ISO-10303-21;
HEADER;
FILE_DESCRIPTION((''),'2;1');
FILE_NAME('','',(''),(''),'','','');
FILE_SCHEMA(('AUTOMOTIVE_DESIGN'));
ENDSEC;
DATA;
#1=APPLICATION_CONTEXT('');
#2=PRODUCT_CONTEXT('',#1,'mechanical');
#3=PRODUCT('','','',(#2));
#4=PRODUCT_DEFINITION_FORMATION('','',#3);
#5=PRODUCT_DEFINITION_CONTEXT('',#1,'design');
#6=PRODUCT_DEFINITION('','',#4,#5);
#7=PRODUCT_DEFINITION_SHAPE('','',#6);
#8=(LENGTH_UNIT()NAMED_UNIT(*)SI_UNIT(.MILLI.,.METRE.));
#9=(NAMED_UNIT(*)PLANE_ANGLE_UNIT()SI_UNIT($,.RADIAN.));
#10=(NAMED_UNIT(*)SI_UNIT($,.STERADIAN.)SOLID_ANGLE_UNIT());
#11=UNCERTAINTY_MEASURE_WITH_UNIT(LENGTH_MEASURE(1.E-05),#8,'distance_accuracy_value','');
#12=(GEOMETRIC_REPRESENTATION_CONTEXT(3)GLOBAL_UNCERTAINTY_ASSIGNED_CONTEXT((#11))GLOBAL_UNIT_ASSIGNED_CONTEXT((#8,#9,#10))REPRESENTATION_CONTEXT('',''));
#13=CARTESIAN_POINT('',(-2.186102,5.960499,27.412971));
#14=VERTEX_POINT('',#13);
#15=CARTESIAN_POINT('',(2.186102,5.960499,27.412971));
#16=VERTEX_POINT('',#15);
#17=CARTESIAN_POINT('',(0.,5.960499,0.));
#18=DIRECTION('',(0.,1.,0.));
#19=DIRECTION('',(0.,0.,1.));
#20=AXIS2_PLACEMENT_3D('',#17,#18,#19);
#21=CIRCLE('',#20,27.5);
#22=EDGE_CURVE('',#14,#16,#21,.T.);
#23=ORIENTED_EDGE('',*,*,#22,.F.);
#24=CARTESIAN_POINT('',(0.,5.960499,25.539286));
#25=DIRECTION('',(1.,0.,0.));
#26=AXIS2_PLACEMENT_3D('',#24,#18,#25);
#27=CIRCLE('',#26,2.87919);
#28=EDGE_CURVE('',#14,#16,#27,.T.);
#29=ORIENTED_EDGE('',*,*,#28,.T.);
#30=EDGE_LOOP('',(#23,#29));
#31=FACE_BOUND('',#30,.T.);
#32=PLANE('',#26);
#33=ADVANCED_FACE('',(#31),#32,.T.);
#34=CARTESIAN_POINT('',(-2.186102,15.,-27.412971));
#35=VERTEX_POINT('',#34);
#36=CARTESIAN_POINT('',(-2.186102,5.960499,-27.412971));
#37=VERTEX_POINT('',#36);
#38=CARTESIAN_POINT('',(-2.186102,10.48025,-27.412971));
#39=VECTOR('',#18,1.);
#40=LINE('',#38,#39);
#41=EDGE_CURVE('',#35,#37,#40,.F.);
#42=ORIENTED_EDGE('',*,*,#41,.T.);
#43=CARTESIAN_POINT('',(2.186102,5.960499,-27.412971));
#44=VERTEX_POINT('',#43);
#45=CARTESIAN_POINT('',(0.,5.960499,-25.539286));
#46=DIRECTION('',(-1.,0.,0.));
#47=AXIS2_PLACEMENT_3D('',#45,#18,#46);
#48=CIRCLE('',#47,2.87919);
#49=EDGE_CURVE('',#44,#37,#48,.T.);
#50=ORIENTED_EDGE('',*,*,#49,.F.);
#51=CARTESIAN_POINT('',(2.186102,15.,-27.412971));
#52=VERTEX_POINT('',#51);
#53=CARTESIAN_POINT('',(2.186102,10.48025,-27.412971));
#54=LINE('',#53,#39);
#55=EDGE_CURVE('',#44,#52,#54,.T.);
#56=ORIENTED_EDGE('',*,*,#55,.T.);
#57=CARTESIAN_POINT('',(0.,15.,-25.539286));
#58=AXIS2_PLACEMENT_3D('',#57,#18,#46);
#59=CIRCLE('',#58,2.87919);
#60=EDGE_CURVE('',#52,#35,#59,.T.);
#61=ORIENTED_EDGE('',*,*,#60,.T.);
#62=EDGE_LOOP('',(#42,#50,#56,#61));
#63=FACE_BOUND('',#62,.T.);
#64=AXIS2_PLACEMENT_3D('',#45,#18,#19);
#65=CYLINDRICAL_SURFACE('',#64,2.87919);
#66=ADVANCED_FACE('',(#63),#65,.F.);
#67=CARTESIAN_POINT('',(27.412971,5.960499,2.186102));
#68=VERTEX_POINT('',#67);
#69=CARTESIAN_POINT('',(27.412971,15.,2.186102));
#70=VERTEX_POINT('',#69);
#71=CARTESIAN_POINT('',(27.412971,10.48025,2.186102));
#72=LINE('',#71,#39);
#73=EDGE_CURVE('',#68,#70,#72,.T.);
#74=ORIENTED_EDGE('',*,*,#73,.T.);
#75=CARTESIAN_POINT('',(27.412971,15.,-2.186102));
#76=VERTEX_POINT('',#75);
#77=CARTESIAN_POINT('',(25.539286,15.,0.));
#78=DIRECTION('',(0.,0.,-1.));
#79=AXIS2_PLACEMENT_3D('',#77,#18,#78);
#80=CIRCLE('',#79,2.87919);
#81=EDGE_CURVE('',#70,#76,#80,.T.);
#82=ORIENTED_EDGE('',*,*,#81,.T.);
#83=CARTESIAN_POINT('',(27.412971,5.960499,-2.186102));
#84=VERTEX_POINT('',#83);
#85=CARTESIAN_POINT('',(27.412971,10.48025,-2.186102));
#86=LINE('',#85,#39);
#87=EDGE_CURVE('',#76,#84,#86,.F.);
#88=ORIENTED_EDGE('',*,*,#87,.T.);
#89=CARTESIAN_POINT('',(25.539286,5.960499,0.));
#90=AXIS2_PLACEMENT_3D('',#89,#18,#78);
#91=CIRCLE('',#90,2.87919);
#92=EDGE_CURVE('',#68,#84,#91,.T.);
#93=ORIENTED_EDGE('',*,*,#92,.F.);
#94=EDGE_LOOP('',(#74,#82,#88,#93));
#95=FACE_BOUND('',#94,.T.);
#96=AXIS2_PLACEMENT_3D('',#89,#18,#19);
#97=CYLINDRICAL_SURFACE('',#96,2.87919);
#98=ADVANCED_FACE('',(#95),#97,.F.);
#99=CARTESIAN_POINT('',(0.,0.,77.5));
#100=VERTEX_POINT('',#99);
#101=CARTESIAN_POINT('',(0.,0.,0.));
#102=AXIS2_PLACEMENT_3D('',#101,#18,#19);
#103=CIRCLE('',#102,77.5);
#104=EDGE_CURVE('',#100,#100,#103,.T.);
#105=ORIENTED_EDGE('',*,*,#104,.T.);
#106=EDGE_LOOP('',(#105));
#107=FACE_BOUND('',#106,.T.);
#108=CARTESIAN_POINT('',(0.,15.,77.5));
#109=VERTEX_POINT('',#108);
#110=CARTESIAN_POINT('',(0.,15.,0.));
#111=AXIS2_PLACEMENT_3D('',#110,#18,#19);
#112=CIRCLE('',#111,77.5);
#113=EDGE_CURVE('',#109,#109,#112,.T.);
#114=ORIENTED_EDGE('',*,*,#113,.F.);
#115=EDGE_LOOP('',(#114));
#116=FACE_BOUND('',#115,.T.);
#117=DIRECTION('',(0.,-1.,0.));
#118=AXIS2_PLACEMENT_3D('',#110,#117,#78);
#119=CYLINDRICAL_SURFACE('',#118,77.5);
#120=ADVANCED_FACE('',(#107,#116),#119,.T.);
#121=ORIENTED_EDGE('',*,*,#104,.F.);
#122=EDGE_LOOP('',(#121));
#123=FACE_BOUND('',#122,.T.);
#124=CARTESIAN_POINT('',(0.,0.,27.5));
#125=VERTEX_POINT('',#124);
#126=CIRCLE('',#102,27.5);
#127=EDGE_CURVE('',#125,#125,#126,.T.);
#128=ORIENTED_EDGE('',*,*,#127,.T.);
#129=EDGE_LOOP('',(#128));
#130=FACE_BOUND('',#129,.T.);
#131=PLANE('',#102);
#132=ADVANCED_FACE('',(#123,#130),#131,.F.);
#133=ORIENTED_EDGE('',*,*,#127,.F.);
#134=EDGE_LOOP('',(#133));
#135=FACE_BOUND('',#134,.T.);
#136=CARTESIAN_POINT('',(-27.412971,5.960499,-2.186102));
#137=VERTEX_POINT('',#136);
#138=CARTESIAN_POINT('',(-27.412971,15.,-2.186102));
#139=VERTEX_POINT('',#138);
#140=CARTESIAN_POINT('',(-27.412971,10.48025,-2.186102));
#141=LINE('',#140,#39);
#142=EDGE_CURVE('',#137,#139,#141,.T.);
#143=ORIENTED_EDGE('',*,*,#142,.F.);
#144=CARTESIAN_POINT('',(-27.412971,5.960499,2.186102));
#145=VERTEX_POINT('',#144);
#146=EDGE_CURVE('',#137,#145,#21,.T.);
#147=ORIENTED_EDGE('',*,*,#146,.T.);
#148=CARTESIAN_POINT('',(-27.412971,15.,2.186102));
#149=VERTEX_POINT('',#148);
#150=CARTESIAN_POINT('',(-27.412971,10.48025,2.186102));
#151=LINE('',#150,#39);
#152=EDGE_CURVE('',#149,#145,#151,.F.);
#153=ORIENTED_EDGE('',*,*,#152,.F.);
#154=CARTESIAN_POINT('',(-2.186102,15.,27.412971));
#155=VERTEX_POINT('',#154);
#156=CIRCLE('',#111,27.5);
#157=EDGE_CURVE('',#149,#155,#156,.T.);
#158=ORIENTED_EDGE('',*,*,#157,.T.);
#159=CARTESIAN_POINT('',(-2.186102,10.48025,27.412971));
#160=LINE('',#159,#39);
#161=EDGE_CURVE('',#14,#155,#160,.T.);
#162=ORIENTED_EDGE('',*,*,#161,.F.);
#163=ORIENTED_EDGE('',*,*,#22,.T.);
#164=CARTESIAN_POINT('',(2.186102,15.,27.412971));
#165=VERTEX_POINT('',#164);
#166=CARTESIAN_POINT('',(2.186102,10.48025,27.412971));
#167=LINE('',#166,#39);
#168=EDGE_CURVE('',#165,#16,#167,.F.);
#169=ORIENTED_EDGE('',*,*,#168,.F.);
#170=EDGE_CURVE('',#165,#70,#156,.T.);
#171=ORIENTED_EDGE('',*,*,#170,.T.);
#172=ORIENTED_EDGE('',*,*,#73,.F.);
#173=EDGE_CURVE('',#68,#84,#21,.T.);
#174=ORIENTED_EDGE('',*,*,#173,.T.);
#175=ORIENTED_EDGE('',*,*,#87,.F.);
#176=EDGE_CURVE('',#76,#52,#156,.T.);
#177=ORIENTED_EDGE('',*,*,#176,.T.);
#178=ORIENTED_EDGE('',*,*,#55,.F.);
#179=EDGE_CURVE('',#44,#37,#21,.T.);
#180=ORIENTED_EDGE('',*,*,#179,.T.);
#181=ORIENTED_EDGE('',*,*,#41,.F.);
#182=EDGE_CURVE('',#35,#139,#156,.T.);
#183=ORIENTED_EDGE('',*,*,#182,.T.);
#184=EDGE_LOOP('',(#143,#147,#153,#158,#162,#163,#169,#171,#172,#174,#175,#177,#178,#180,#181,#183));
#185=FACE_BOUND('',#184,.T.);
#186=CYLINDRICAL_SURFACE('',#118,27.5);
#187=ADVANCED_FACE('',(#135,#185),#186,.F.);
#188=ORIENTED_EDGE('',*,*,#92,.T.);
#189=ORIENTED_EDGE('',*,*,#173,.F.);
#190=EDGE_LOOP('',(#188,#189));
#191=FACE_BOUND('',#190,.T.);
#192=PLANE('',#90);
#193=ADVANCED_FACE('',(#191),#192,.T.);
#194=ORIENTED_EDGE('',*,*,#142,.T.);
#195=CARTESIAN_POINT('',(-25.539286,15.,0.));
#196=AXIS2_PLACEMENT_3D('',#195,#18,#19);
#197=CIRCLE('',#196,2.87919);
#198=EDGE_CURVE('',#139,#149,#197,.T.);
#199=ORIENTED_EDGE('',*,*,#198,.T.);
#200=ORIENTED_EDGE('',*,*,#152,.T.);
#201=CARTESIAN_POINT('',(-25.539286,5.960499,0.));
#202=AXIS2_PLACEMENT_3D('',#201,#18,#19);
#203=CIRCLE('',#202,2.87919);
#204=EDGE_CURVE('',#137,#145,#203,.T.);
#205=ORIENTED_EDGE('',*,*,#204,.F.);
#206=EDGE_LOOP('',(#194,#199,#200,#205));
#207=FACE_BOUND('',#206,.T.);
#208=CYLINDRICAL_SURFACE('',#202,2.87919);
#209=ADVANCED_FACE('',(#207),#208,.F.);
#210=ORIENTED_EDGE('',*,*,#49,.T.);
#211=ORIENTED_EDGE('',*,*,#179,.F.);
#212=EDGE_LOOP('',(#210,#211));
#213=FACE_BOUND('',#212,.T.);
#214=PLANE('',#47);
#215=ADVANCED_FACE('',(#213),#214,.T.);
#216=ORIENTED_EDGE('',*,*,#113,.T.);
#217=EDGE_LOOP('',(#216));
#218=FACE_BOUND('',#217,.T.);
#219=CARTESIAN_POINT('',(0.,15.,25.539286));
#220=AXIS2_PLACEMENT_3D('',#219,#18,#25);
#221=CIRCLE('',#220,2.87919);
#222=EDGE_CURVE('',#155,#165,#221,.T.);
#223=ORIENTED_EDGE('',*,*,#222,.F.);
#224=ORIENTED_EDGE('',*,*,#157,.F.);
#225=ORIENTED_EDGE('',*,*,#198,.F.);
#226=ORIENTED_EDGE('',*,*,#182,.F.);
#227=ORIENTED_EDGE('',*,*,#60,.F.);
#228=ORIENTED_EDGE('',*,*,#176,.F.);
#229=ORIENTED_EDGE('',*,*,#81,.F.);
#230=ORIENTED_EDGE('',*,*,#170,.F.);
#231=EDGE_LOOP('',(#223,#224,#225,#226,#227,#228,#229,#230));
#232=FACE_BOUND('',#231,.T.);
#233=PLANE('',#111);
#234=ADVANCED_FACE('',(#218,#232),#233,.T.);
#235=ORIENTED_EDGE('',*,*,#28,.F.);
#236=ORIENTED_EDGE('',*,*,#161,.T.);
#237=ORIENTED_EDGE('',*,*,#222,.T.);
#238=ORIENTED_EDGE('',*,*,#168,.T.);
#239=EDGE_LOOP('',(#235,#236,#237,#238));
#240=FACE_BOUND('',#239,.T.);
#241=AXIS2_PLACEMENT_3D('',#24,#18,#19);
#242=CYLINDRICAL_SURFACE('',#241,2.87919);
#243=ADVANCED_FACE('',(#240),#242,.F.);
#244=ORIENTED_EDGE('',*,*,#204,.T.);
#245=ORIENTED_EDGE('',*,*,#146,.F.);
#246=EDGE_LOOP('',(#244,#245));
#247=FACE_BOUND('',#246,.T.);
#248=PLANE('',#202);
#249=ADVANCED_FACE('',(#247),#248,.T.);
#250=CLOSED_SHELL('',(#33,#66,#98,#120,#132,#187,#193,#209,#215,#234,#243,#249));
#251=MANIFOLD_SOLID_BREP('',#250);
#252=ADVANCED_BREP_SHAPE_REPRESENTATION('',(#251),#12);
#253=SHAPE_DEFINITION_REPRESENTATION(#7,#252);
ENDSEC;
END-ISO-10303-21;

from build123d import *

# Parameters (mm, degrees)
SKETCH1_R           = 77.5
BOSS_EXTRUDE1_DEPTH = 15
SKETCH2_R           = 27.5
CUT_EXTRUDE1_DEPTH  = 111.623234449
SKETCH3_R           = 2.879190032
CUT_EXTRUDE2_DEPTH  = 9.039500984
CIRPATTERN1_COUNT   = 4


with BuildPart() as part:
    # Sketch1 → Boss-Extrude1 (new body)
    with BuildSketch(Plane(origin=(0, 0, 0), x_dir=(1, 0, 0), z_dir=(0, 1, 0))):
        Circle(SKETCH1_R)
    extrude(amount=BOSS_EXTRUDE1_DEPTH)

    # Sketch2 → Cut-Extrude1 (cut, through all)
    with BuildSketch(Plane(origin=(0, 0, 0), x_dir=(1, 0, 0), z_dir=(0, 1, 0))):
        Circle(SKETCH2_R)
    extrude(amount=CUT_EXTRUDE1_DEPTH, mode=Mode.SUBTRACT)

    # Sketch3 → Cut-Extrude2 (cut)
    with BuildSketch(Plane(origin=(0, 15, 0), x_dir=(1, 0, 0), z_dir=(0, 1, 0))):
        with Locations((-25.53928648, 0)):
            Circle(SKETCH3_R)
    cut_extrude2 = extrude(amount=-CUT_EXTRUDE2_DEPTH, mode=Mode.SUBTRACT)

    # CirPattern1: Cut-Extrude2 ×4 about axis
    cirpattern1_axis = Axis((0, 0, 0), (0, 1, 0))
    for i in range(1, CIRPATTERN1_COUNT):
        add(cut_extrude2.rotate(cirpattern1_axis, i * 360 / CIRPATTERN1_COUNT), mode=Mode.SUBTRACT)


solid = part.part
